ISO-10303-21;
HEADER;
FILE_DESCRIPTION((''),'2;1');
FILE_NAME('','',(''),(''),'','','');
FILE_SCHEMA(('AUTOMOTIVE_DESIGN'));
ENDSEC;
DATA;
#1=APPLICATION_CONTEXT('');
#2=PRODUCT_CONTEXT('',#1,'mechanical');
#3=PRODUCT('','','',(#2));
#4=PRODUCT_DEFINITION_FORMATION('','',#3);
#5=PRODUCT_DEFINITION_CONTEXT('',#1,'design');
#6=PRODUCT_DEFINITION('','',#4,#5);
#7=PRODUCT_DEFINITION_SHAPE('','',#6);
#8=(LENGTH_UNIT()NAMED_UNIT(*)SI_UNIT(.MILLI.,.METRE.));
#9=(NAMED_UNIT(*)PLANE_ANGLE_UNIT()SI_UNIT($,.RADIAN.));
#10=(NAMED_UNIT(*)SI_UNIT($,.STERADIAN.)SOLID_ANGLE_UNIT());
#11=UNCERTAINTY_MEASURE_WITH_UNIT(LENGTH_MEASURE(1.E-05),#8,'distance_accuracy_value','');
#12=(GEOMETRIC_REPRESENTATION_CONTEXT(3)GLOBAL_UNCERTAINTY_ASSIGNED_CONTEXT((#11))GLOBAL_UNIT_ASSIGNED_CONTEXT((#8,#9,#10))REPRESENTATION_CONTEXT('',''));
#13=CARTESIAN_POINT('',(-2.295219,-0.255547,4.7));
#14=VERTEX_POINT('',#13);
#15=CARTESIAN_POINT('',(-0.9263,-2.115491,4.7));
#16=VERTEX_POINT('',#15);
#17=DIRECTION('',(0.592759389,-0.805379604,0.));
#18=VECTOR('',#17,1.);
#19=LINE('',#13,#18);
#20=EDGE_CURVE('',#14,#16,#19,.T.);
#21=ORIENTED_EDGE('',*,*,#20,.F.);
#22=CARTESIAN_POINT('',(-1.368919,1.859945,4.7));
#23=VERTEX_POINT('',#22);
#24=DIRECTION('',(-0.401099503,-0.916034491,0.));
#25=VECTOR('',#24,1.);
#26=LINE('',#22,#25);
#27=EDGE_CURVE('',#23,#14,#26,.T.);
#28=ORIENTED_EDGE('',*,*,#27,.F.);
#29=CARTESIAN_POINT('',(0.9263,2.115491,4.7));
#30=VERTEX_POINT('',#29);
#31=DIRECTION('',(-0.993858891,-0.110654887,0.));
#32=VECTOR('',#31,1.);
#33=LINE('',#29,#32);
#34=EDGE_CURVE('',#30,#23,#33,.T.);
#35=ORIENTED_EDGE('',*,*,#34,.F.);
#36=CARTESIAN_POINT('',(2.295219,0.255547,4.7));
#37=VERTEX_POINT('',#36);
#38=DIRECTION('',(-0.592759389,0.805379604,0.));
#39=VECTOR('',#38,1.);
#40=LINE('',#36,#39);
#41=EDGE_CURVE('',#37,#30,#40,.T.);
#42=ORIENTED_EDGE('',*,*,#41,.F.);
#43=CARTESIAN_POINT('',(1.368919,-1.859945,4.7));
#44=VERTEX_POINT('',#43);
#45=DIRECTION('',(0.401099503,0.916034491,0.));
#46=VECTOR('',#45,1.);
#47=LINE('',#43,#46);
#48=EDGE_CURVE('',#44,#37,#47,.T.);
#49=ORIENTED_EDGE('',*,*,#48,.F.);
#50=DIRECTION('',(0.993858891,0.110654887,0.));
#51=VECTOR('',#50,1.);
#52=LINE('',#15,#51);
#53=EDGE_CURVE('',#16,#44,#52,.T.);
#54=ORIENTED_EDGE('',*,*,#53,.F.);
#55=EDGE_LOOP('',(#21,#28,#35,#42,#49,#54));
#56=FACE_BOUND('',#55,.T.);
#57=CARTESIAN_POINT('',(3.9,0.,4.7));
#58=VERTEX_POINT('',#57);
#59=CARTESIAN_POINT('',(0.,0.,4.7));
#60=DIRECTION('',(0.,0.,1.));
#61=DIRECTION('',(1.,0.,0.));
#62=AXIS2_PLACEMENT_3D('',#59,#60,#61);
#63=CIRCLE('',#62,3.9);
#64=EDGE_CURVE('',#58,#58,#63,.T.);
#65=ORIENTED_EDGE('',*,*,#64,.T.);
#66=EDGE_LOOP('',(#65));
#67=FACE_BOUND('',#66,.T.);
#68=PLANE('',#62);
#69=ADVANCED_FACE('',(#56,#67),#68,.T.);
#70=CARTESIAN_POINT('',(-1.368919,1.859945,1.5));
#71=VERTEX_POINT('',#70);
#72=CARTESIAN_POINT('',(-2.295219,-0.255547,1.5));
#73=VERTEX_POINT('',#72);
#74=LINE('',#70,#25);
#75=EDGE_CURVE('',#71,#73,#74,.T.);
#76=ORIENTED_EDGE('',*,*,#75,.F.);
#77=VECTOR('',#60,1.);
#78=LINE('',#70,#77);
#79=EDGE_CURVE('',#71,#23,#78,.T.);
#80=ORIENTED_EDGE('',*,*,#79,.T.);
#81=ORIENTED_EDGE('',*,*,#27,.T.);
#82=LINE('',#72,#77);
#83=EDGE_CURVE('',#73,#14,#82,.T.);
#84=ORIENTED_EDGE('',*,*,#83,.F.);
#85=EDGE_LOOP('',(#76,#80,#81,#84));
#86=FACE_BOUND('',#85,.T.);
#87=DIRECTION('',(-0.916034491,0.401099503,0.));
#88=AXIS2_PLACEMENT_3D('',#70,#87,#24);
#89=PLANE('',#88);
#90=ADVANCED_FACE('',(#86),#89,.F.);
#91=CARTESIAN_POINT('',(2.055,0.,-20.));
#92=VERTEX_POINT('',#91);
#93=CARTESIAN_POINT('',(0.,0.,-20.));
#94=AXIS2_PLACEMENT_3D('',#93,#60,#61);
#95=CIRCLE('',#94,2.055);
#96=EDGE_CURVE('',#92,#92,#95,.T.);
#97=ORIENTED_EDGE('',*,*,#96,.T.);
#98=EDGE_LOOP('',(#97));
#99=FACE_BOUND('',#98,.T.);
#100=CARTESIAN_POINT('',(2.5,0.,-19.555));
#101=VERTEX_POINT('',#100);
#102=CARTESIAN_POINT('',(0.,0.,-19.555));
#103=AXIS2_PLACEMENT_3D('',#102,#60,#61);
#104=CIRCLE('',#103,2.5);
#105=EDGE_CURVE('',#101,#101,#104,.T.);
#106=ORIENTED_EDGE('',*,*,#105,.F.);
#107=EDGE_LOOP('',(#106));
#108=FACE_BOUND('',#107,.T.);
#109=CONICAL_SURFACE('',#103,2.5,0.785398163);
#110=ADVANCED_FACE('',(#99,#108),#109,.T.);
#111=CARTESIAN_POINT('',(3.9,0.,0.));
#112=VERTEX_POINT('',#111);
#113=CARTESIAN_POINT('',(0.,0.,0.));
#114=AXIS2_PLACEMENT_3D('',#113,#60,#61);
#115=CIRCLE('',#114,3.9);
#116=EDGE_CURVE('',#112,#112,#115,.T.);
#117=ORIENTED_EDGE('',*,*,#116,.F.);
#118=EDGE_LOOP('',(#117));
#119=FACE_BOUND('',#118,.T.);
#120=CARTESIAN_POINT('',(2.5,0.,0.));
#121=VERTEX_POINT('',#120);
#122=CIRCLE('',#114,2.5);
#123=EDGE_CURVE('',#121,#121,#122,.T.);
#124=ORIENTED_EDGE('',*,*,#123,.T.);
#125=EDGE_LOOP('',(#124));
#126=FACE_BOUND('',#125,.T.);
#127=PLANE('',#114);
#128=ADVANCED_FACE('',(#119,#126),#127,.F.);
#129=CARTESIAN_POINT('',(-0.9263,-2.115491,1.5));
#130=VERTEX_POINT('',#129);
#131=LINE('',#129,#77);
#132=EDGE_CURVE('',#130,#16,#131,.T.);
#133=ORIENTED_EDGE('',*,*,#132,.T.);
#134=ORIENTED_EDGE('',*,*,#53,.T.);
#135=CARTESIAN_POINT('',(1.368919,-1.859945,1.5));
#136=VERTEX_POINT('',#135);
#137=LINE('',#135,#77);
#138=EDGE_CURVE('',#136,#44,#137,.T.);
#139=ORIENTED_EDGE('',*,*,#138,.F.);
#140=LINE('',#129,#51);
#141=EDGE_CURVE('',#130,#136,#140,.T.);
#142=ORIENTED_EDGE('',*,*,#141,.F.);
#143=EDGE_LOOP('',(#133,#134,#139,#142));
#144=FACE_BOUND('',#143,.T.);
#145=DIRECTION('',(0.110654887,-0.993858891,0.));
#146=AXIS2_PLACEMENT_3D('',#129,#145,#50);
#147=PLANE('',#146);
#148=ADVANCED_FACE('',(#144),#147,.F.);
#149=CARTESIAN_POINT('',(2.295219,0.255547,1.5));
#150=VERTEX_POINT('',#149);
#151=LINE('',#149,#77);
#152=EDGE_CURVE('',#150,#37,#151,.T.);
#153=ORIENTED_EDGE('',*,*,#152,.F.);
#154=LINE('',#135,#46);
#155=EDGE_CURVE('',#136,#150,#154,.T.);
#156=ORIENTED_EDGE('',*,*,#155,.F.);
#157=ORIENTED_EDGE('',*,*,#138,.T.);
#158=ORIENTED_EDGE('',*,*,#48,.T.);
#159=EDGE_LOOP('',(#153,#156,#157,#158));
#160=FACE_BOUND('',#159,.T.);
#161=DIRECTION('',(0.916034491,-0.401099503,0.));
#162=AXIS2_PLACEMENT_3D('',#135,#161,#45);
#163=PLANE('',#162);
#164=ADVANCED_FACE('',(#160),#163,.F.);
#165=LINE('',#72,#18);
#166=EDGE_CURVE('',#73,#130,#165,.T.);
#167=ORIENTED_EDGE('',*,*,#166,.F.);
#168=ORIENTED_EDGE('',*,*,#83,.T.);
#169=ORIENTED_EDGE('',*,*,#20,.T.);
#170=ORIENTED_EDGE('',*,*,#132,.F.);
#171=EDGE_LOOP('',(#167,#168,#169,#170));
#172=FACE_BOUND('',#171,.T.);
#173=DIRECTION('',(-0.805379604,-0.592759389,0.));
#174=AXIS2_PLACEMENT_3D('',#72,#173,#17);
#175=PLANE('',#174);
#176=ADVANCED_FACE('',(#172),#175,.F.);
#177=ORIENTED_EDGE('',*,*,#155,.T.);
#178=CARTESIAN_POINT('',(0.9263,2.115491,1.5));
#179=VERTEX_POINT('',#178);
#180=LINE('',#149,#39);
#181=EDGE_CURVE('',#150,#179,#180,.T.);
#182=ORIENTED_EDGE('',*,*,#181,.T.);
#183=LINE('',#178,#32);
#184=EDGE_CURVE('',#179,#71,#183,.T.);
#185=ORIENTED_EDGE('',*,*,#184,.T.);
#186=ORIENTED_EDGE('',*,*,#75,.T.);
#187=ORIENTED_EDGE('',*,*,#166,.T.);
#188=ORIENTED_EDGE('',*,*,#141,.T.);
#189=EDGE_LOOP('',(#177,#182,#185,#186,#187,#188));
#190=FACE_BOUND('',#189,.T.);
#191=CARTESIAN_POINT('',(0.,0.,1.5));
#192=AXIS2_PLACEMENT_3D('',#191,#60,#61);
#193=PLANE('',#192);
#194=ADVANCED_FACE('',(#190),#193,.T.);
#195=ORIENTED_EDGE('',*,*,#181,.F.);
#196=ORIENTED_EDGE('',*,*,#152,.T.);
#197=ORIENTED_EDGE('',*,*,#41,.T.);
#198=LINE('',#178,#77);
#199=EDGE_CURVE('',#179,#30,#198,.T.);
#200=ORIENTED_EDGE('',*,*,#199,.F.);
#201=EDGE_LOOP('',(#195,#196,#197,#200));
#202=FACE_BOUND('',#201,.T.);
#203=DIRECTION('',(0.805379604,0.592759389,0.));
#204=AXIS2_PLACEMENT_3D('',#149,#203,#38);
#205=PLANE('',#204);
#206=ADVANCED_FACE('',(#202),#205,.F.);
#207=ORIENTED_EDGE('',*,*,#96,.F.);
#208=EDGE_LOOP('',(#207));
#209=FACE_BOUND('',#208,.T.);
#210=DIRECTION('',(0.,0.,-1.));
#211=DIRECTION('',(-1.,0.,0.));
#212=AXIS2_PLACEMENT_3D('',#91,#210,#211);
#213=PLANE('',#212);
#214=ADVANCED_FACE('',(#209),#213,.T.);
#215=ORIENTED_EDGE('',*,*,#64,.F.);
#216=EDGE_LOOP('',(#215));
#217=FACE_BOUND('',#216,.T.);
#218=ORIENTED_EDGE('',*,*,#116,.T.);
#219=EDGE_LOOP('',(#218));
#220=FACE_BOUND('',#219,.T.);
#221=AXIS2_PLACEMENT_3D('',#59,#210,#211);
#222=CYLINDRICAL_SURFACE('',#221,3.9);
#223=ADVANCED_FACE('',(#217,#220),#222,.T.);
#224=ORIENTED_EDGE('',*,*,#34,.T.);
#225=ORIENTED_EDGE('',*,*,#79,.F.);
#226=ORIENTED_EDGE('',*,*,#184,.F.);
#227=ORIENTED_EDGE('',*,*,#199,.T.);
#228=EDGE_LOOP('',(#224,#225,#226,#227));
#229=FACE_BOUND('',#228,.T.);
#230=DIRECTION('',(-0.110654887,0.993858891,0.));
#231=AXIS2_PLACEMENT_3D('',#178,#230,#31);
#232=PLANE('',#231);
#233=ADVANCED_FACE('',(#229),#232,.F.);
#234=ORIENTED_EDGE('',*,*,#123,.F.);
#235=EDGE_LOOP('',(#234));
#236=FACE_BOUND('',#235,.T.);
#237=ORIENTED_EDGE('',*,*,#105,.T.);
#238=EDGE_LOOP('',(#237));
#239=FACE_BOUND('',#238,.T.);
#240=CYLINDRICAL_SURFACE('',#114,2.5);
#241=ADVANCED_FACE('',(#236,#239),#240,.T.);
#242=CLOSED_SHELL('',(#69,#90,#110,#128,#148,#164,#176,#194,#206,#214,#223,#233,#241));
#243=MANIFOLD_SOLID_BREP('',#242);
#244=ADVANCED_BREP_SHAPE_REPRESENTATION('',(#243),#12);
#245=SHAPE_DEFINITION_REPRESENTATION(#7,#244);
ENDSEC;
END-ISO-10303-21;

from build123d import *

# Parameters (mm, degrees)
SKETCH1_R           = 3.9
BOSS_EXTRUDE1_DEPTH = 4.7
CUT_EXTRUDE1_DEPTH  = 3.2


# Read off the part's stored shape, not the designer's step: M5x0.8 Machine Threads Stud1
with BuildPart() as part:
    # Sketch1 → Boss-Extrude1 (new body)
    with BuildSketch(Plane.XY):
        Circle(SKETCH1_R)
    extrude(amount=BOSS_EXTRUDE1_DEPTH)

    # M5x0.8 Machine Threads Stud1 outline → M5x0.8 Machine Threads Stud1 (revolve)
    with BuildSketch(Plane.XZ):
        Polygon((0, 0), (0, -20), (2.055, -20), (2.5, -19.555), (2.5, 0), align=None)
    revolve(axis=Axis((0, 0, 0), (0, 0, 1)))

    # Sketch5 → Cut-Extrude1 (cut)
    with BuildSketch(Plane.XY.offset(4.7)):
        Polygon((1.368919171, -1.859944525), (2.295218794, 0.255546515), (0.926299623, 2.11549104), (-1.368919171, 1.859944525), (-2.295218794, -0.255546515), (-0.926299623, -2.11549104), align=None)
    extrude(amount=-CUT_EXTRUDE1_DEPTH, mode=Mode.SUBTRACT)


solid = part.part
